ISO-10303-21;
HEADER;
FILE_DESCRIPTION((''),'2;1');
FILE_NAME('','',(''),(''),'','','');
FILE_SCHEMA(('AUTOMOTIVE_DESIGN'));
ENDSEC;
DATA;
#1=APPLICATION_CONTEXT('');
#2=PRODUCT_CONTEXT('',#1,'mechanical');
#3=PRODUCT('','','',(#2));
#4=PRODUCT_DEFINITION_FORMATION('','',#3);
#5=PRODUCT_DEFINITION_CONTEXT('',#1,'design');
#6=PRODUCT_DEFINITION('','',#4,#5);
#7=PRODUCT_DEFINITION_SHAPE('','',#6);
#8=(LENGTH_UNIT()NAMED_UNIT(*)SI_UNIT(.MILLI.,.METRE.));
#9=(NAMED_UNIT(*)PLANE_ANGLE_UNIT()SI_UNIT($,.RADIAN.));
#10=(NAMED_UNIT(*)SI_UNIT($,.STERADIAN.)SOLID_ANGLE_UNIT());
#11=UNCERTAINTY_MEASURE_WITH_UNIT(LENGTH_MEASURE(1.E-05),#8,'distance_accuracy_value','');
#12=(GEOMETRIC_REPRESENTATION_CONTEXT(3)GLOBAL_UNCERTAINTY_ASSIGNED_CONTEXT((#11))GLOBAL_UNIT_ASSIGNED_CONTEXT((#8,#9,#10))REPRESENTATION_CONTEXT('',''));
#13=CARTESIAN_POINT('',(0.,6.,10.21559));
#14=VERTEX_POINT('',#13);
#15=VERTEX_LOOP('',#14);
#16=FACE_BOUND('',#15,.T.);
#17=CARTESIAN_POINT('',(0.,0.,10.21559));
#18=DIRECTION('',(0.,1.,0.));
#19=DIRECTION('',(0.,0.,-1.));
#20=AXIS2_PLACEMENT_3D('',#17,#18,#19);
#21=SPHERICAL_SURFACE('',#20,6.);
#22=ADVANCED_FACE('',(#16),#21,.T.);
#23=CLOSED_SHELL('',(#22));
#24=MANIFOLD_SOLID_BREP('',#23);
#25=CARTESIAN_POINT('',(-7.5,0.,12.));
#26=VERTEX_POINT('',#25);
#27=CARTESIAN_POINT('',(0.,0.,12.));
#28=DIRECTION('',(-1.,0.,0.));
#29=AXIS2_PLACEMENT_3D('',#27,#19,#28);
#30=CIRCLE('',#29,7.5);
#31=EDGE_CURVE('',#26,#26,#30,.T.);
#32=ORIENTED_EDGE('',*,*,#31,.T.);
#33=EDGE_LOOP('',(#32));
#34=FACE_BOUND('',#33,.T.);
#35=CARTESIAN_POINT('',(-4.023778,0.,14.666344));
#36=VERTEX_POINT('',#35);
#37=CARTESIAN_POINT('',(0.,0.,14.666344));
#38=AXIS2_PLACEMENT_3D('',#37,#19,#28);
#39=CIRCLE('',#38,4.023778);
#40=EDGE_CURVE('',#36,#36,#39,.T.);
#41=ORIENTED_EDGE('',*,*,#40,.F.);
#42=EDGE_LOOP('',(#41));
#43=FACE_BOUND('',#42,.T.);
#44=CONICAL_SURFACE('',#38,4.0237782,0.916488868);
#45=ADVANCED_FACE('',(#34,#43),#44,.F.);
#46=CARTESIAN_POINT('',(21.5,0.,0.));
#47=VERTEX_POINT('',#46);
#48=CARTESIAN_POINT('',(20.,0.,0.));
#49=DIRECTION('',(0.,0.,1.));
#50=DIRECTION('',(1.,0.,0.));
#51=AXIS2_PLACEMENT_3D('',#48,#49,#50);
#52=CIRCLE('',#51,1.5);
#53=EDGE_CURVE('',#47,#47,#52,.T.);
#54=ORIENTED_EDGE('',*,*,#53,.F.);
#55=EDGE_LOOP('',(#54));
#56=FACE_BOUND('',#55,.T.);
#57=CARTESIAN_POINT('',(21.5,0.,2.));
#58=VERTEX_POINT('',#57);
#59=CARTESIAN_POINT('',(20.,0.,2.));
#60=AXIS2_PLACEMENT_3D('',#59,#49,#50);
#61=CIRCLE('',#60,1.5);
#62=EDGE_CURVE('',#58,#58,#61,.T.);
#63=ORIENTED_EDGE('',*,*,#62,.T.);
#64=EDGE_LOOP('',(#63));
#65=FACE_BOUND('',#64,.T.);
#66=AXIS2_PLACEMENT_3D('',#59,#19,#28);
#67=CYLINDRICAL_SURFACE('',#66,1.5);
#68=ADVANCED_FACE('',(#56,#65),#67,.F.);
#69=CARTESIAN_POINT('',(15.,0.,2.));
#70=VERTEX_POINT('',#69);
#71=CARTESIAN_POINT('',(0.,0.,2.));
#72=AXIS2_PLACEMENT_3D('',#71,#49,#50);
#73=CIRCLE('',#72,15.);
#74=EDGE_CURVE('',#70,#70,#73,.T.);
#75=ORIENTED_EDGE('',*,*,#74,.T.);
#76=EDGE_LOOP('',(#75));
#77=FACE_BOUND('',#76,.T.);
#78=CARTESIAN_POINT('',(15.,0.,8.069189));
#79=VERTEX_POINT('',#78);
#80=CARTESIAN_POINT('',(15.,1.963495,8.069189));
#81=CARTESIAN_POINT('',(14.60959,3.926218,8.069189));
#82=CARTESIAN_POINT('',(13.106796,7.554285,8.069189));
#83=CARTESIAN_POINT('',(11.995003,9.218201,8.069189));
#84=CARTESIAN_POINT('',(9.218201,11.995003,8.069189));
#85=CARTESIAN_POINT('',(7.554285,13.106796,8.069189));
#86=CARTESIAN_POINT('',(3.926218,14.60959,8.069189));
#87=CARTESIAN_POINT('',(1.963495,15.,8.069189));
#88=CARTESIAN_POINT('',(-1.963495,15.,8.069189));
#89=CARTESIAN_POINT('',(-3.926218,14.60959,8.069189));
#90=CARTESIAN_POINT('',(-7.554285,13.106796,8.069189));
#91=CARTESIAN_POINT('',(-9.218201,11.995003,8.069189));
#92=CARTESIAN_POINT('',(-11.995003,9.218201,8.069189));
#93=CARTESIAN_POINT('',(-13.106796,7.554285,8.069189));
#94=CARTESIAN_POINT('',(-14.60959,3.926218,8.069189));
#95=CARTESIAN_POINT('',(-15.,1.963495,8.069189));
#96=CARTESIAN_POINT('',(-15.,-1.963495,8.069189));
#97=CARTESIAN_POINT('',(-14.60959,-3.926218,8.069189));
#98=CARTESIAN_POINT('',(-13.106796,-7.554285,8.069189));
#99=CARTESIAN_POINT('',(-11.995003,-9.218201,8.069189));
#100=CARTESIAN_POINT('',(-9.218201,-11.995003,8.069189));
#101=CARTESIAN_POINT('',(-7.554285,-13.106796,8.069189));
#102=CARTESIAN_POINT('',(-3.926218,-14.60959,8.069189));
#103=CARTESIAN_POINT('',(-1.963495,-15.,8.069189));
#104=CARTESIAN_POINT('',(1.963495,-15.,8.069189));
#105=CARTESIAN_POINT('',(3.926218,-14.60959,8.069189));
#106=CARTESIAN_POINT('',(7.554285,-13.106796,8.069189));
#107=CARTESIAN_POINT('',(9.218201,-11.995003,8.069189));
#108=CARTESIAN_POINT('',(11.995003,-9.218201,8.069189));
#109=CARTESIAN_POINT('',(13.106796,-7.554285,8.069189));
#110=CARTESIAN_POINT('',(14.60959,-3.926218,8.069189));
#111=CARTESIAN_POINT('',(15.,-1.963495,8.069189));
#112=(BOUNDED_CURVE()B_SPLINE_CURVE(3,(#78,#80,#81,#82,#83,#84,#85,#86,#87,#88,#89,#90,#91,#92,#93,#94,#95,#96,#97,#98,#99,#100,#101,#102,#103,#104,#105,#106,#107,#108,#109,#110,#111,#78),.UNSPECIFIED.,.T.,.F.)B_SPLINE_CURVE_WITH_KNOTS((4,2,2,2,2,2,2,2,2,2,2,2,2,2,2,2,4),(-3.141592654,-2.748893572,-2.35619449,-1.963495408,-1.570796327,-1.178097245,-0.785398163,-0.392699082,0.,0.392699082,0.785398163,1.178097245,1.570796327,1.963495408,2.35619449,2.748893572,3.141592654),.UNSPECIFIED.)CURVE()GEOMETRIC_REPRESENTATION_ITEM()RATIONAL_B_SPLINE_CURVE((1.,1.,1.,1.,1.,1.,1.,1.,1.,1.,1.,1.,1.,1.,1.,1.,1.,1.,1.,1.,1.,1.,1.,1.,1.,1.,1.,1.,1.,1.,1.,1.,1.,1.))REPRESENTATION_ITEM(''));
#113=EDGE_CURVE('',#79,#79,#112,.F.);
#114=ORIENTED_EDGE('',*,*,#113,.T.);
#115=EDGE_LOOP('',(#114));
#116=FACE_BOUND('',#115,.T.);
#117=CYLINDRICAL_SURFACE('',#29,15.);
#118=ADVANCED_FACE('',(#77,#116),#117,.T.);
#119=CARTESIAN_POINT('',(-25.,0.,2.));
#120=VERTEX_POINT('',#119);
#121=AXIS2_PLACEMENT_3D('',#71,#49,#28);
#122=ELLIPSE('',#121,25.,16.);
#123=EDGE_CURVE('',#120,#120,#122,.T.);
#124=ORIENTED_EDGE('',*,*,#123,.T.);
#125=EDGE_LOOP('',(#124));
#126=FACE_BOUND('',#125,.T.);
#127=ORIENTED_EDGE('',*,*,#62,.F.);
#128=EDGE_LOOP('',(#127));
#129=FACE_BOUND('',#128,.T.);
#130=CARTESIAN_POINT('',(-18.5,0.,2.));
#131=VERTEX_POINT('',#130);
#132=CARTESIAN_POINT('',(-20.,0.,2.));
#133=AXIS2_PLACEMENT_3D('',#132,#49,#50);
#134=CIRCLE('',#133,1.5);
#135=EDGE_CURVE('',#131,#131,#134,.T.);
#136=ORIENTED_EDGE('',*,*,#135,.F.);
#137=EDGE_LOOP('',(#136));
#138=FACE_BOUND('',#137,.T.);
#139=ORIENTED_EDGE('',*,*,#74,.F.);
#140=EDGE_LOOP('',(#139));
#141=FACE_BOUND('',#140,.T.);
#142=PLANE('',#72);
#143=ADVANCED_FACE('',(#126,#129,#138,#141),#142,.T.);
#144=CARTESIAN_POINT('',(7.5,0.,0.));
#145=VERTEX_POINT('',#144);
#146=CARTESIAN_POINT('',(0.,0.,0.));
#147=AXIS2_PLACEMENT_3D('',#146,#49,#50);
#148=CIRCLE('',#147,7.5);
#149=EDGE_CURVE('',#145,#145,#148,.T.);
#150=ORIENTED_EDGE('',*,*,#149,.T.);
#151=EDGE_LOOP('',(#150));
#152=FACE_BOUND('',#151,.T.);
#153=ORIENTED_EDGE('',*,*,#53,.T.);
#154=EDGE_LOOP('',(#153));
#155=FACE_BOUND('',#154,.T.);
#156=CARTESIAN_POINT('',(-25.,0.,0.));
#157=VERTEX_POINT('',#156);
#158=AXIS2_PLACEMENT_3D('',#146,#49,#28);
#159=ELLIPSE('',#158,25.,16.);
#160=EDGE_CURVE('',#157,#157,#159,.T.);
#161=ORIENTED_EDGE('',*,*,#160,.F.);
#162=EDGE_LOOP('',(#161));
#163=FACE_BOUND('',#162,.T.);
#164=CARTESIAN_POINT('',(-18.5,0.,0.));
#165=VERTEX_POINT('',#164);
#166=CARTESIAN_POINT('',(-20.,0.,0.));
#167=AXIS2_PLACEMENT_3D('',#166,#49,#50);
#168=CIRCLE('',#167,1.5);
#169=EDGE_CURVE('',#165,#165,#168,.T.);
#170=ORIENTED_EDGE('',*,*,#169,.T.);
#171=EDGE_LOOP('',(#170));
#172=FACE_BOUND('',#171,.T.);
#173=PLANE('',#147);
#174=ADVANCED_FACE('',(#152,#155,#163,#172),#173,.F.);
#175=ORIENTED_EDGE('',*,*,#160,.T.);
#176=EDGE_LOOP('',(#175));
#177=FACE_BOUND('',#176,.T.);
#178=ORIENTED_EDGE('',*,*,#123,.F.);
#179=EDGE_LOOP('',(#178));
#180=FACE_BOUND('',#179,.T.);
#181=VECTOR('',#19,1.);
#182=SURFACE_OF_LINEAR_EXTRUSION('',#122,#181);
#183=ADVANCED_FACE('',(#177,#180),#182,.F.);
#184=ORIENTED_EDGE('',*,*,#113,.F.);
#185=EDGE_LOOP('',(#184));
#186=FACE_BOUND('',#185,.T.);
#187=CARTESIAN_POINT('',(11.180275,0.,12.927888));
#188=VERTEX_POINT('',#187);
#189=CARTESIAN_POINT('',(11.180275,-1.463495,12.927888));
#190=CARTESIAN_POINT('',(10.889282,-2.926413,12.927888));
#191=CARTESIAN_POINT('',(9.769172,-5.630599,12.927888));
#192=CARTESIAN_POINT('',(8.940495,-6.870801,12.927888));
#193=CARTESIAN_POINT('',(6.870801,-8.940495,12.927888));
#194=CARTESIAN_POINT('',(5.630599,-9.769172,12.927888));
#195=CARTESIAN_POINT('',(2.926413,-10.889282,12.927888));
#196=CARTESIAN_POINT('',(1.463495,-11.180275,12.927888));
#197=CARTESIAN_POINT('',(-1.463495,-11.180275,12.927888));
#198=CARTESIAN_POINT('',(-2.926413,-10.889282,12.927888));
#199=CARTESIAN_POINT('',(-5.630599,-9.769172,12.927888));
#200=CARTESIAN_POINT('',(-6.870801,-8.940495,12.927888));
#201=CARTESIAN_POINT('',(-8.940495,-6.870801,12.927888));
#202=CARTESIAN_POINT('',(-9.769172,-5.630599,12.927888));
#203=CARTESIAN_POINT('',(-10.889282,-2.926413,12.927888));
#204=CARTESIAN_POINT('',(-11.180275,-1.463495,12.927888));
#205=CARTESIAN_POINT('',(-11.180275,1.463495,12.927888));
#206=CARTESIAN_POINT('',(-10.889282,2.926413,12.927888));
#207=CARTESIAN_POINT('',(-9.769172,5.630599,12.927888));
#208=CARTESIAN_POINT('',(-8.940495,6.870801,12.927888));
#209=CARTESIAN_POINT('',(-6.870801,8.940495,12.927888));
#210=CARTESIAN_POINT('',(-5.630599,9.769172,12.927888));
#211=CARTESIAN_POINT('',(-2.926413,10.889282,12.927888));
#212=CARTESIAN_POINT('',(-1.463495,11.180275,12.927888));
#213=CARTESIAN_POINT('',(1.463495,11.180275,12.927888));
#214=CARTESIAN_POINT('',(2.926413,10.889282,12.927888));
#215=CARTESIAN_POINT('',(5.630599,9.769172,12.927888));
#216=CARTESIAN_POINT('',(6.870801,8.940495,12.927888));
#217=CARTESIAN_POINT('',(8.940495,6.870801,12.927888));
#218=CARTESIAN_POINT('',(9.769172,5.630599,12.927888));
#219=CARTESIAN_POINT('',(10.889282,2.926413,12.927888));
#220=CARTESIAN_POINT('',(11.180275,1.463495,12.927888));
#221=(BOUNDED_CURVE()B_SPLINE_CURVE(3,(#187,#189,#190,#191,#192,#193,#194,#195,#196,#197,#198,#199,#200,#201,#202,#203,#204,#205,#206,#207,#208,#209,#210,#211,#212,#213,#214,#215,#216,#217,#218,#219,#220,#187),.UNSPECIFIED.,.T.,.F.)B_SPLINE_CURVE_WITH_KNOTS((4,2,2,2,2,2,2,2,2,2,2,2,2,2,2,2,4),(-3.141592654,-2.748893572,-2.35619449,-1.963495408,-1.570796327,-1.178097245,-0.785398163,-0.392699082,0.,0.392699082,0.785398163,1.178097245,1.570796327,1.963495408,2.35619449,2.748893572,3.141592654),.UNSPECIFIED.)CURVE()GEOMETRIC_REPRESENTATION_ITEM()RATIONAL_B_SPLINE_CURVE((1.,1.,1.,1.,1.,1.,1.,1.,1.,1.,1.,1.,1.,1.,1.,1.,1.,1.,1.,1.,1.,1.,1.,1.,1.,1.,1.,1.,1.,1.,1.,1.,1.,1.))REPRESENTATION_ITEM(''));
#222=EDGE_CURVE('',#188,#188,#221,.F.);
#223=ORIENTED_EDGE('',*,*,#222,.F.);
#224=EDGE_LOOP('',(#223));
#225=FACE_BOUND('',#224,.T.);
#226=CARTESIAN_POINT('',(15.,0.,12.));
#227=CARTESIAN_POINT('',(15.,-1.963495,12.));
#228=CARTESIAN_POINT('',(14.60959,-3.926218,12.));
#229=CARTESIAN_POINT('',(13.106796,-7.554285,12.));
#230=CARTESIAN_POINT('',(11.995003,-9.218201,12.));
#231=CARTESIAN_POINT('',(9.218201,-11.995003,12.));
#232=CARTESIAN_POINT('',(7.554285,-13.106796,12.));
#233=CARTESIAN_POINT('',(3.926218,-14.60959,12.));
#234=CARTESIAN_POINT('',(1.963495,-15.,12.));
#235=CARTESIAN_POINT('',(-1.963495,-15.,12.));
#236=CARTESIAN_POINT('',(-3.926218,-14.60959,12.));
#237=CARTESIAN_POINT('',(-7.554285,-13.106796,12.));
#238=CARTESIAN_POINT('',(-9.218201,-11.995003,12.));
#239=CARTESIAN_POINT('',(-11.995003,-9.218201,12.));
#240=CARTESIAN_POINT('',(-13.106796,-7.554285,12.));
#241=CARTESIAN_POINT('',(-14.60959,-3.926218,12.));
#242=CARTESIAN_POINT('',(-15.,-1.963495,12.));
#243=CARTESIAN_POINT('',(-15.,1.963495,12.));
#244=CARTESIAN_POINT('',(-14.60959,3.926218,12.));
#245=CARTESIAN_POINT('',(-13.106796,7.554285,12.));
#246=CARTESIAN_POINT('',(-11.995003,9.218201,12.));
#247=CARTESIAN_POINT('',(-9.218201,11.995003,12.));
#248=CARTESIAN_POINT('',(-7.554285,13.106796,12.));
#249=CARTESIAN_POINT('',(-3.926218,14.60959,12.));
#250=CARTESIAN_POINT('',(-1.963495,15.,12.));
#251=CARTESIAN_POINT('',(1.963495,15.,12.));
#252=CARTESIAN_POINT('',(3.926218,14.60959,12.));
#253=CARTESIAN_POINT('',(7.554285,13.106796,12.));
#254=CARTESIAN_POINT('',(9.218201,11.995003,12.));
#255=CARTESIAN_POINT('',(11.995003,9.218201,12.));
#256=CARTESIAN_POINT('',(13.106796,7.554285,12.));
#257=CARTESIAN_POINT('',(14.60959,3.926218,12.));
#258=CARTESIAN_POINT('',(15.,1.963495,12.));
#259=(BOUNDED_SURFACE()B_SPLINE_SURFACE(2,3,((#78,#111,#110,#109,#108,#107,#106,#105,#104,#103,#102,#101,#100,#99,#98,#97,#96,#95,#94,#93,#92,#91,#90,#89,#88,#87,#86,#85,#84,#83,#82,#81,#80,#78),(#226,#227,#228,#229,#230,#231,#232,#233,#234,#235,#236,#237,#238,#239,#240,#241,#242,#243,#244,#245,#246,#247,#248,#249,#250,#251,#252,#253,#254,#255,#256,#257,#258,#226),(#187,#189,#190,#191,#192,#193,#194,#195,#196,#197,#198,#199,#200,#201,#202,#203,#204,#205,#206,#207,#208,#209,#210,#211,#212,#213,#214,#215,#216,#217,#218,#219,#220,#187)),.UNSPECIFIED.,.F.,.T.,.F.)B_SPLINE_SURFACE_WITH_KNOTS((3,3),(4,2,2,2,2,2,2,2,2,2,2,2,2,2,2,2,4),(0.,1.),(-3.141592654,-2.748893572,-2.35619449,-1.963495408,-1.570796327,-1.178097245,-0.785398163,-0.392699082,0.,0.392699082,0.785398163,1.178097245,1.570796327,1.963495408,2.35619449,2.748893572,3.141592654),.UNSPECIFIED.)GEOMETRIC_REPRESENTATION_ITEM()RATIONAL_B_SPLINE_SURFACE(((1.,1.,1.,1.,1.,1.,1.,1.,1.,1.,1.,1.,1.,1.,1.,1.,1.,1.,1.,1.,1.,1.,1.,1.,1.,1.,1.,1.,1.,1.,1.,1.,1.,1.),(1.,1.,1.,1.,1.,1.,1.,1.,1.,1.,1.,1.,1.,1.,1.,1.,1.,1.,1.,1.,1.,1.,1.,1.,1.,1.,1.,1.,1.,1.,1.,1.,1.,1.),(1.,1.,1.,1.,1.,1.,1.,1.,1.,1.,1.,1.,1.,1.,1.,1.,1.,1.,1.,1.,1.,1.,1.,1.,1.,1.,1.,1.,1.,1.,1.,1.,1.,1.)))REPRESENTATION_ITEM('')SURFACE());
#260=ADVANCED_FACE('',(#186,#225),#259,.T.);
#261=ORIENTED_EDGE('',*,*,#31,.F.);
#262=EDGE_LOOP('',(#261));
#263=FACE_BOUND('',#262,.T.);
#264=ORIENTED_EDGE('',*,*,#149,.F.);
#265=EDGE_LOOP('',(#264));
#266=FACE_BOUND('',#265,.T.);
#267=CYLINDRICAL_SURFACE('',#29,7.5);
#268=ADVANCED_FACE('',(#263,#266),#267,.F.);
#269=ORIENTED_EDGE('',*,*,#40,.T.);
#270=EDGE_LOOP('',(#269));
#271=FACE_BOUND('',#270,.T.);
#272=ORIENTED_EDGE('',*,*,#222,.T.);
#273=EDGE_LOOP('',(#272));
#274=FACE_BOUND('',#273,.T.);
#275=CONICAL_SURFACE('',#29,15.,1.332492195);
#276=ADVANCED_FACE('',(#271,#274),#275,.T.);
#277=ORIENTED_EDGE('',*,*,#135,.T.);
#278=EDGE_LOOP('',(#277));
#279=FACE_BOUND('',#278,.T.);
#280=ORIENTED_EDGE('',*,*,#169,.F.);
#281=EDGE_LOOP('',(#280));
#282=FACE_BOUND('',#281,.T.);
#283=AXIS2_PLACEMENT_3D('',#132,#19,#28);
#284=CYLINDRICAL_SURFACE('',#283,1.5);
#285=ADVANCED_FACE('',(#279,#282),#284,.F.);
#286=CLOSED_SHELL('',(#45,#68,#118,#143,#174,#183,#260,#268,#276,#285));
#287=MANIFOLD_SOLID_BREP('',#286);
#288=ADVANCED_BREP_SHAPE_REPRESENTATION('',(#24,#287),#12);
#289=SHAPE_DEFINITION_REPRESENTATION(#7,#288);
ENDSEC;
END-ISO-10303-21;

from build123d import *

# Parameters (mm, degrees)
SKETCH1_RX          = 25
SKETCH1_RY          = 16
SKETCH1_R           = 15
SKETCH1_R_2         = 1.5
BOSS_EXTRUDE6_DEPTH = 2
SKETCH1_11_R        = 15
SKETCH1_11_R_2      = 7.5
BOSS_EXTRUDE7_DEPTH = 12


with BuildPart() as part:
    # Sketch1 → Boss-Extrude6 (new body)
    with BuildSketch(Plane.XY):
        with Locations(Location((0, 0), (0, 0, 180))):
            Ellipse(SKETCH1_RX, SKETCH1_RY)
        Circle(SKETCH1_R, mode=Mode.SUBTRACT)
        with Locations((-20, 0)):
            Circle(SKETCH1_R_2, mode=Mode.SUBTRACT)
        with Locations((20, 0)):
            Circle(SKETCH1_R_2, mode=Mode.SUBTRACT)
    extrude(amount=BOSS_EXTRUDE6_DEPTH)

    # Sketch1<11> → Boss-Extrude7 (add)
    with BuildSketch(Plane.XY):
        Circle(SKETCH1_11_R)
        Circle(SKETCH1_11_R_2, mode=Mode.SUBTRACT)
    extrude(amount=BOSS_EXTRUDE7_DEPTH)

    # Sketch6 → Revolve2 (revolve)
    with BuildSketch(Plane(origin=(0, 0, 0), x_dir=(0, 0, -1), z_dir=(1, 0, 0)), mode=Mode.PRIVATE) as revolve2_sk:
        Polygon((-12, 15), (-14.666344011, 4.0237782), (-12, 7.5), align=None)
    revolve(revolve2_sk.sketch.rotate(Axis((0, 0, 0), (0, 0, 1)), 90), axis=Axis((0, 0, 0), (0, 0, 1)))

    # Fillet1
    # a fillet whose section is not a circle: 5 mm, written as the material it takes off along each edge
    with BuildSketch(Plane(origin=(0, 0, 12), x_dir=(-1, 0, 0), z_dir=(0, 1, 0))) as fillet1_piece_1:
        with BuildLine():
            Bezier((15, -3.93081081), (15, 0), (11.180275121, 0.927887641), weights=[1, 1, 1])
            Line((11.180275121, 0.927887641), (15, 0))
            Line((15, 0), (15, -3.93081081))
        make_face()
    revolve(axis=Axis((0, 0, 12), (0, 0, 1)), revolution_arc=180, mode=Mode.SUBTRACT)
    with BuildSketch(Plane(origin=(0, 0, 12), x_dir=(1, 0, 0), z_dir=(0, -1, 0))) as fillet1_piece_2:
        with BuildLine():
            Bezier((15, -3.93081081), (15, 0), (11.180275121, 0.927887641), weights=[1, 1, 1])
            Line((11.180275121, 0.927887641), (15, 0))
            Line((15, 0), (15, -3.93081081))
        make_face()
    revolve(axis=Axis((0, 0, 12), (0, 0, 1)), revolution_arc=180, mode=Mode.SUBTRACT)


with BuildPart() as body_2:
    # Sketch5 → Revolve1 (revolve)
    with BuildSketch(Plane(origin=(0, 0, 0), x_dir=(0, 0, -1), z_dir=(1, 0, 0))):
        with BuildLine():
            Line((-10.215590255, 6), (-10.215590255, -6))
            ThreePointArc((-10.215590255, -6), (-16.215590255, 0), (-10.215590255, 6))
        make_face()
    revolve(axis=Axis((0, 6, 10.215590255), (0, -1, 0)))


solid = Compound([part.part, body_2.part])
